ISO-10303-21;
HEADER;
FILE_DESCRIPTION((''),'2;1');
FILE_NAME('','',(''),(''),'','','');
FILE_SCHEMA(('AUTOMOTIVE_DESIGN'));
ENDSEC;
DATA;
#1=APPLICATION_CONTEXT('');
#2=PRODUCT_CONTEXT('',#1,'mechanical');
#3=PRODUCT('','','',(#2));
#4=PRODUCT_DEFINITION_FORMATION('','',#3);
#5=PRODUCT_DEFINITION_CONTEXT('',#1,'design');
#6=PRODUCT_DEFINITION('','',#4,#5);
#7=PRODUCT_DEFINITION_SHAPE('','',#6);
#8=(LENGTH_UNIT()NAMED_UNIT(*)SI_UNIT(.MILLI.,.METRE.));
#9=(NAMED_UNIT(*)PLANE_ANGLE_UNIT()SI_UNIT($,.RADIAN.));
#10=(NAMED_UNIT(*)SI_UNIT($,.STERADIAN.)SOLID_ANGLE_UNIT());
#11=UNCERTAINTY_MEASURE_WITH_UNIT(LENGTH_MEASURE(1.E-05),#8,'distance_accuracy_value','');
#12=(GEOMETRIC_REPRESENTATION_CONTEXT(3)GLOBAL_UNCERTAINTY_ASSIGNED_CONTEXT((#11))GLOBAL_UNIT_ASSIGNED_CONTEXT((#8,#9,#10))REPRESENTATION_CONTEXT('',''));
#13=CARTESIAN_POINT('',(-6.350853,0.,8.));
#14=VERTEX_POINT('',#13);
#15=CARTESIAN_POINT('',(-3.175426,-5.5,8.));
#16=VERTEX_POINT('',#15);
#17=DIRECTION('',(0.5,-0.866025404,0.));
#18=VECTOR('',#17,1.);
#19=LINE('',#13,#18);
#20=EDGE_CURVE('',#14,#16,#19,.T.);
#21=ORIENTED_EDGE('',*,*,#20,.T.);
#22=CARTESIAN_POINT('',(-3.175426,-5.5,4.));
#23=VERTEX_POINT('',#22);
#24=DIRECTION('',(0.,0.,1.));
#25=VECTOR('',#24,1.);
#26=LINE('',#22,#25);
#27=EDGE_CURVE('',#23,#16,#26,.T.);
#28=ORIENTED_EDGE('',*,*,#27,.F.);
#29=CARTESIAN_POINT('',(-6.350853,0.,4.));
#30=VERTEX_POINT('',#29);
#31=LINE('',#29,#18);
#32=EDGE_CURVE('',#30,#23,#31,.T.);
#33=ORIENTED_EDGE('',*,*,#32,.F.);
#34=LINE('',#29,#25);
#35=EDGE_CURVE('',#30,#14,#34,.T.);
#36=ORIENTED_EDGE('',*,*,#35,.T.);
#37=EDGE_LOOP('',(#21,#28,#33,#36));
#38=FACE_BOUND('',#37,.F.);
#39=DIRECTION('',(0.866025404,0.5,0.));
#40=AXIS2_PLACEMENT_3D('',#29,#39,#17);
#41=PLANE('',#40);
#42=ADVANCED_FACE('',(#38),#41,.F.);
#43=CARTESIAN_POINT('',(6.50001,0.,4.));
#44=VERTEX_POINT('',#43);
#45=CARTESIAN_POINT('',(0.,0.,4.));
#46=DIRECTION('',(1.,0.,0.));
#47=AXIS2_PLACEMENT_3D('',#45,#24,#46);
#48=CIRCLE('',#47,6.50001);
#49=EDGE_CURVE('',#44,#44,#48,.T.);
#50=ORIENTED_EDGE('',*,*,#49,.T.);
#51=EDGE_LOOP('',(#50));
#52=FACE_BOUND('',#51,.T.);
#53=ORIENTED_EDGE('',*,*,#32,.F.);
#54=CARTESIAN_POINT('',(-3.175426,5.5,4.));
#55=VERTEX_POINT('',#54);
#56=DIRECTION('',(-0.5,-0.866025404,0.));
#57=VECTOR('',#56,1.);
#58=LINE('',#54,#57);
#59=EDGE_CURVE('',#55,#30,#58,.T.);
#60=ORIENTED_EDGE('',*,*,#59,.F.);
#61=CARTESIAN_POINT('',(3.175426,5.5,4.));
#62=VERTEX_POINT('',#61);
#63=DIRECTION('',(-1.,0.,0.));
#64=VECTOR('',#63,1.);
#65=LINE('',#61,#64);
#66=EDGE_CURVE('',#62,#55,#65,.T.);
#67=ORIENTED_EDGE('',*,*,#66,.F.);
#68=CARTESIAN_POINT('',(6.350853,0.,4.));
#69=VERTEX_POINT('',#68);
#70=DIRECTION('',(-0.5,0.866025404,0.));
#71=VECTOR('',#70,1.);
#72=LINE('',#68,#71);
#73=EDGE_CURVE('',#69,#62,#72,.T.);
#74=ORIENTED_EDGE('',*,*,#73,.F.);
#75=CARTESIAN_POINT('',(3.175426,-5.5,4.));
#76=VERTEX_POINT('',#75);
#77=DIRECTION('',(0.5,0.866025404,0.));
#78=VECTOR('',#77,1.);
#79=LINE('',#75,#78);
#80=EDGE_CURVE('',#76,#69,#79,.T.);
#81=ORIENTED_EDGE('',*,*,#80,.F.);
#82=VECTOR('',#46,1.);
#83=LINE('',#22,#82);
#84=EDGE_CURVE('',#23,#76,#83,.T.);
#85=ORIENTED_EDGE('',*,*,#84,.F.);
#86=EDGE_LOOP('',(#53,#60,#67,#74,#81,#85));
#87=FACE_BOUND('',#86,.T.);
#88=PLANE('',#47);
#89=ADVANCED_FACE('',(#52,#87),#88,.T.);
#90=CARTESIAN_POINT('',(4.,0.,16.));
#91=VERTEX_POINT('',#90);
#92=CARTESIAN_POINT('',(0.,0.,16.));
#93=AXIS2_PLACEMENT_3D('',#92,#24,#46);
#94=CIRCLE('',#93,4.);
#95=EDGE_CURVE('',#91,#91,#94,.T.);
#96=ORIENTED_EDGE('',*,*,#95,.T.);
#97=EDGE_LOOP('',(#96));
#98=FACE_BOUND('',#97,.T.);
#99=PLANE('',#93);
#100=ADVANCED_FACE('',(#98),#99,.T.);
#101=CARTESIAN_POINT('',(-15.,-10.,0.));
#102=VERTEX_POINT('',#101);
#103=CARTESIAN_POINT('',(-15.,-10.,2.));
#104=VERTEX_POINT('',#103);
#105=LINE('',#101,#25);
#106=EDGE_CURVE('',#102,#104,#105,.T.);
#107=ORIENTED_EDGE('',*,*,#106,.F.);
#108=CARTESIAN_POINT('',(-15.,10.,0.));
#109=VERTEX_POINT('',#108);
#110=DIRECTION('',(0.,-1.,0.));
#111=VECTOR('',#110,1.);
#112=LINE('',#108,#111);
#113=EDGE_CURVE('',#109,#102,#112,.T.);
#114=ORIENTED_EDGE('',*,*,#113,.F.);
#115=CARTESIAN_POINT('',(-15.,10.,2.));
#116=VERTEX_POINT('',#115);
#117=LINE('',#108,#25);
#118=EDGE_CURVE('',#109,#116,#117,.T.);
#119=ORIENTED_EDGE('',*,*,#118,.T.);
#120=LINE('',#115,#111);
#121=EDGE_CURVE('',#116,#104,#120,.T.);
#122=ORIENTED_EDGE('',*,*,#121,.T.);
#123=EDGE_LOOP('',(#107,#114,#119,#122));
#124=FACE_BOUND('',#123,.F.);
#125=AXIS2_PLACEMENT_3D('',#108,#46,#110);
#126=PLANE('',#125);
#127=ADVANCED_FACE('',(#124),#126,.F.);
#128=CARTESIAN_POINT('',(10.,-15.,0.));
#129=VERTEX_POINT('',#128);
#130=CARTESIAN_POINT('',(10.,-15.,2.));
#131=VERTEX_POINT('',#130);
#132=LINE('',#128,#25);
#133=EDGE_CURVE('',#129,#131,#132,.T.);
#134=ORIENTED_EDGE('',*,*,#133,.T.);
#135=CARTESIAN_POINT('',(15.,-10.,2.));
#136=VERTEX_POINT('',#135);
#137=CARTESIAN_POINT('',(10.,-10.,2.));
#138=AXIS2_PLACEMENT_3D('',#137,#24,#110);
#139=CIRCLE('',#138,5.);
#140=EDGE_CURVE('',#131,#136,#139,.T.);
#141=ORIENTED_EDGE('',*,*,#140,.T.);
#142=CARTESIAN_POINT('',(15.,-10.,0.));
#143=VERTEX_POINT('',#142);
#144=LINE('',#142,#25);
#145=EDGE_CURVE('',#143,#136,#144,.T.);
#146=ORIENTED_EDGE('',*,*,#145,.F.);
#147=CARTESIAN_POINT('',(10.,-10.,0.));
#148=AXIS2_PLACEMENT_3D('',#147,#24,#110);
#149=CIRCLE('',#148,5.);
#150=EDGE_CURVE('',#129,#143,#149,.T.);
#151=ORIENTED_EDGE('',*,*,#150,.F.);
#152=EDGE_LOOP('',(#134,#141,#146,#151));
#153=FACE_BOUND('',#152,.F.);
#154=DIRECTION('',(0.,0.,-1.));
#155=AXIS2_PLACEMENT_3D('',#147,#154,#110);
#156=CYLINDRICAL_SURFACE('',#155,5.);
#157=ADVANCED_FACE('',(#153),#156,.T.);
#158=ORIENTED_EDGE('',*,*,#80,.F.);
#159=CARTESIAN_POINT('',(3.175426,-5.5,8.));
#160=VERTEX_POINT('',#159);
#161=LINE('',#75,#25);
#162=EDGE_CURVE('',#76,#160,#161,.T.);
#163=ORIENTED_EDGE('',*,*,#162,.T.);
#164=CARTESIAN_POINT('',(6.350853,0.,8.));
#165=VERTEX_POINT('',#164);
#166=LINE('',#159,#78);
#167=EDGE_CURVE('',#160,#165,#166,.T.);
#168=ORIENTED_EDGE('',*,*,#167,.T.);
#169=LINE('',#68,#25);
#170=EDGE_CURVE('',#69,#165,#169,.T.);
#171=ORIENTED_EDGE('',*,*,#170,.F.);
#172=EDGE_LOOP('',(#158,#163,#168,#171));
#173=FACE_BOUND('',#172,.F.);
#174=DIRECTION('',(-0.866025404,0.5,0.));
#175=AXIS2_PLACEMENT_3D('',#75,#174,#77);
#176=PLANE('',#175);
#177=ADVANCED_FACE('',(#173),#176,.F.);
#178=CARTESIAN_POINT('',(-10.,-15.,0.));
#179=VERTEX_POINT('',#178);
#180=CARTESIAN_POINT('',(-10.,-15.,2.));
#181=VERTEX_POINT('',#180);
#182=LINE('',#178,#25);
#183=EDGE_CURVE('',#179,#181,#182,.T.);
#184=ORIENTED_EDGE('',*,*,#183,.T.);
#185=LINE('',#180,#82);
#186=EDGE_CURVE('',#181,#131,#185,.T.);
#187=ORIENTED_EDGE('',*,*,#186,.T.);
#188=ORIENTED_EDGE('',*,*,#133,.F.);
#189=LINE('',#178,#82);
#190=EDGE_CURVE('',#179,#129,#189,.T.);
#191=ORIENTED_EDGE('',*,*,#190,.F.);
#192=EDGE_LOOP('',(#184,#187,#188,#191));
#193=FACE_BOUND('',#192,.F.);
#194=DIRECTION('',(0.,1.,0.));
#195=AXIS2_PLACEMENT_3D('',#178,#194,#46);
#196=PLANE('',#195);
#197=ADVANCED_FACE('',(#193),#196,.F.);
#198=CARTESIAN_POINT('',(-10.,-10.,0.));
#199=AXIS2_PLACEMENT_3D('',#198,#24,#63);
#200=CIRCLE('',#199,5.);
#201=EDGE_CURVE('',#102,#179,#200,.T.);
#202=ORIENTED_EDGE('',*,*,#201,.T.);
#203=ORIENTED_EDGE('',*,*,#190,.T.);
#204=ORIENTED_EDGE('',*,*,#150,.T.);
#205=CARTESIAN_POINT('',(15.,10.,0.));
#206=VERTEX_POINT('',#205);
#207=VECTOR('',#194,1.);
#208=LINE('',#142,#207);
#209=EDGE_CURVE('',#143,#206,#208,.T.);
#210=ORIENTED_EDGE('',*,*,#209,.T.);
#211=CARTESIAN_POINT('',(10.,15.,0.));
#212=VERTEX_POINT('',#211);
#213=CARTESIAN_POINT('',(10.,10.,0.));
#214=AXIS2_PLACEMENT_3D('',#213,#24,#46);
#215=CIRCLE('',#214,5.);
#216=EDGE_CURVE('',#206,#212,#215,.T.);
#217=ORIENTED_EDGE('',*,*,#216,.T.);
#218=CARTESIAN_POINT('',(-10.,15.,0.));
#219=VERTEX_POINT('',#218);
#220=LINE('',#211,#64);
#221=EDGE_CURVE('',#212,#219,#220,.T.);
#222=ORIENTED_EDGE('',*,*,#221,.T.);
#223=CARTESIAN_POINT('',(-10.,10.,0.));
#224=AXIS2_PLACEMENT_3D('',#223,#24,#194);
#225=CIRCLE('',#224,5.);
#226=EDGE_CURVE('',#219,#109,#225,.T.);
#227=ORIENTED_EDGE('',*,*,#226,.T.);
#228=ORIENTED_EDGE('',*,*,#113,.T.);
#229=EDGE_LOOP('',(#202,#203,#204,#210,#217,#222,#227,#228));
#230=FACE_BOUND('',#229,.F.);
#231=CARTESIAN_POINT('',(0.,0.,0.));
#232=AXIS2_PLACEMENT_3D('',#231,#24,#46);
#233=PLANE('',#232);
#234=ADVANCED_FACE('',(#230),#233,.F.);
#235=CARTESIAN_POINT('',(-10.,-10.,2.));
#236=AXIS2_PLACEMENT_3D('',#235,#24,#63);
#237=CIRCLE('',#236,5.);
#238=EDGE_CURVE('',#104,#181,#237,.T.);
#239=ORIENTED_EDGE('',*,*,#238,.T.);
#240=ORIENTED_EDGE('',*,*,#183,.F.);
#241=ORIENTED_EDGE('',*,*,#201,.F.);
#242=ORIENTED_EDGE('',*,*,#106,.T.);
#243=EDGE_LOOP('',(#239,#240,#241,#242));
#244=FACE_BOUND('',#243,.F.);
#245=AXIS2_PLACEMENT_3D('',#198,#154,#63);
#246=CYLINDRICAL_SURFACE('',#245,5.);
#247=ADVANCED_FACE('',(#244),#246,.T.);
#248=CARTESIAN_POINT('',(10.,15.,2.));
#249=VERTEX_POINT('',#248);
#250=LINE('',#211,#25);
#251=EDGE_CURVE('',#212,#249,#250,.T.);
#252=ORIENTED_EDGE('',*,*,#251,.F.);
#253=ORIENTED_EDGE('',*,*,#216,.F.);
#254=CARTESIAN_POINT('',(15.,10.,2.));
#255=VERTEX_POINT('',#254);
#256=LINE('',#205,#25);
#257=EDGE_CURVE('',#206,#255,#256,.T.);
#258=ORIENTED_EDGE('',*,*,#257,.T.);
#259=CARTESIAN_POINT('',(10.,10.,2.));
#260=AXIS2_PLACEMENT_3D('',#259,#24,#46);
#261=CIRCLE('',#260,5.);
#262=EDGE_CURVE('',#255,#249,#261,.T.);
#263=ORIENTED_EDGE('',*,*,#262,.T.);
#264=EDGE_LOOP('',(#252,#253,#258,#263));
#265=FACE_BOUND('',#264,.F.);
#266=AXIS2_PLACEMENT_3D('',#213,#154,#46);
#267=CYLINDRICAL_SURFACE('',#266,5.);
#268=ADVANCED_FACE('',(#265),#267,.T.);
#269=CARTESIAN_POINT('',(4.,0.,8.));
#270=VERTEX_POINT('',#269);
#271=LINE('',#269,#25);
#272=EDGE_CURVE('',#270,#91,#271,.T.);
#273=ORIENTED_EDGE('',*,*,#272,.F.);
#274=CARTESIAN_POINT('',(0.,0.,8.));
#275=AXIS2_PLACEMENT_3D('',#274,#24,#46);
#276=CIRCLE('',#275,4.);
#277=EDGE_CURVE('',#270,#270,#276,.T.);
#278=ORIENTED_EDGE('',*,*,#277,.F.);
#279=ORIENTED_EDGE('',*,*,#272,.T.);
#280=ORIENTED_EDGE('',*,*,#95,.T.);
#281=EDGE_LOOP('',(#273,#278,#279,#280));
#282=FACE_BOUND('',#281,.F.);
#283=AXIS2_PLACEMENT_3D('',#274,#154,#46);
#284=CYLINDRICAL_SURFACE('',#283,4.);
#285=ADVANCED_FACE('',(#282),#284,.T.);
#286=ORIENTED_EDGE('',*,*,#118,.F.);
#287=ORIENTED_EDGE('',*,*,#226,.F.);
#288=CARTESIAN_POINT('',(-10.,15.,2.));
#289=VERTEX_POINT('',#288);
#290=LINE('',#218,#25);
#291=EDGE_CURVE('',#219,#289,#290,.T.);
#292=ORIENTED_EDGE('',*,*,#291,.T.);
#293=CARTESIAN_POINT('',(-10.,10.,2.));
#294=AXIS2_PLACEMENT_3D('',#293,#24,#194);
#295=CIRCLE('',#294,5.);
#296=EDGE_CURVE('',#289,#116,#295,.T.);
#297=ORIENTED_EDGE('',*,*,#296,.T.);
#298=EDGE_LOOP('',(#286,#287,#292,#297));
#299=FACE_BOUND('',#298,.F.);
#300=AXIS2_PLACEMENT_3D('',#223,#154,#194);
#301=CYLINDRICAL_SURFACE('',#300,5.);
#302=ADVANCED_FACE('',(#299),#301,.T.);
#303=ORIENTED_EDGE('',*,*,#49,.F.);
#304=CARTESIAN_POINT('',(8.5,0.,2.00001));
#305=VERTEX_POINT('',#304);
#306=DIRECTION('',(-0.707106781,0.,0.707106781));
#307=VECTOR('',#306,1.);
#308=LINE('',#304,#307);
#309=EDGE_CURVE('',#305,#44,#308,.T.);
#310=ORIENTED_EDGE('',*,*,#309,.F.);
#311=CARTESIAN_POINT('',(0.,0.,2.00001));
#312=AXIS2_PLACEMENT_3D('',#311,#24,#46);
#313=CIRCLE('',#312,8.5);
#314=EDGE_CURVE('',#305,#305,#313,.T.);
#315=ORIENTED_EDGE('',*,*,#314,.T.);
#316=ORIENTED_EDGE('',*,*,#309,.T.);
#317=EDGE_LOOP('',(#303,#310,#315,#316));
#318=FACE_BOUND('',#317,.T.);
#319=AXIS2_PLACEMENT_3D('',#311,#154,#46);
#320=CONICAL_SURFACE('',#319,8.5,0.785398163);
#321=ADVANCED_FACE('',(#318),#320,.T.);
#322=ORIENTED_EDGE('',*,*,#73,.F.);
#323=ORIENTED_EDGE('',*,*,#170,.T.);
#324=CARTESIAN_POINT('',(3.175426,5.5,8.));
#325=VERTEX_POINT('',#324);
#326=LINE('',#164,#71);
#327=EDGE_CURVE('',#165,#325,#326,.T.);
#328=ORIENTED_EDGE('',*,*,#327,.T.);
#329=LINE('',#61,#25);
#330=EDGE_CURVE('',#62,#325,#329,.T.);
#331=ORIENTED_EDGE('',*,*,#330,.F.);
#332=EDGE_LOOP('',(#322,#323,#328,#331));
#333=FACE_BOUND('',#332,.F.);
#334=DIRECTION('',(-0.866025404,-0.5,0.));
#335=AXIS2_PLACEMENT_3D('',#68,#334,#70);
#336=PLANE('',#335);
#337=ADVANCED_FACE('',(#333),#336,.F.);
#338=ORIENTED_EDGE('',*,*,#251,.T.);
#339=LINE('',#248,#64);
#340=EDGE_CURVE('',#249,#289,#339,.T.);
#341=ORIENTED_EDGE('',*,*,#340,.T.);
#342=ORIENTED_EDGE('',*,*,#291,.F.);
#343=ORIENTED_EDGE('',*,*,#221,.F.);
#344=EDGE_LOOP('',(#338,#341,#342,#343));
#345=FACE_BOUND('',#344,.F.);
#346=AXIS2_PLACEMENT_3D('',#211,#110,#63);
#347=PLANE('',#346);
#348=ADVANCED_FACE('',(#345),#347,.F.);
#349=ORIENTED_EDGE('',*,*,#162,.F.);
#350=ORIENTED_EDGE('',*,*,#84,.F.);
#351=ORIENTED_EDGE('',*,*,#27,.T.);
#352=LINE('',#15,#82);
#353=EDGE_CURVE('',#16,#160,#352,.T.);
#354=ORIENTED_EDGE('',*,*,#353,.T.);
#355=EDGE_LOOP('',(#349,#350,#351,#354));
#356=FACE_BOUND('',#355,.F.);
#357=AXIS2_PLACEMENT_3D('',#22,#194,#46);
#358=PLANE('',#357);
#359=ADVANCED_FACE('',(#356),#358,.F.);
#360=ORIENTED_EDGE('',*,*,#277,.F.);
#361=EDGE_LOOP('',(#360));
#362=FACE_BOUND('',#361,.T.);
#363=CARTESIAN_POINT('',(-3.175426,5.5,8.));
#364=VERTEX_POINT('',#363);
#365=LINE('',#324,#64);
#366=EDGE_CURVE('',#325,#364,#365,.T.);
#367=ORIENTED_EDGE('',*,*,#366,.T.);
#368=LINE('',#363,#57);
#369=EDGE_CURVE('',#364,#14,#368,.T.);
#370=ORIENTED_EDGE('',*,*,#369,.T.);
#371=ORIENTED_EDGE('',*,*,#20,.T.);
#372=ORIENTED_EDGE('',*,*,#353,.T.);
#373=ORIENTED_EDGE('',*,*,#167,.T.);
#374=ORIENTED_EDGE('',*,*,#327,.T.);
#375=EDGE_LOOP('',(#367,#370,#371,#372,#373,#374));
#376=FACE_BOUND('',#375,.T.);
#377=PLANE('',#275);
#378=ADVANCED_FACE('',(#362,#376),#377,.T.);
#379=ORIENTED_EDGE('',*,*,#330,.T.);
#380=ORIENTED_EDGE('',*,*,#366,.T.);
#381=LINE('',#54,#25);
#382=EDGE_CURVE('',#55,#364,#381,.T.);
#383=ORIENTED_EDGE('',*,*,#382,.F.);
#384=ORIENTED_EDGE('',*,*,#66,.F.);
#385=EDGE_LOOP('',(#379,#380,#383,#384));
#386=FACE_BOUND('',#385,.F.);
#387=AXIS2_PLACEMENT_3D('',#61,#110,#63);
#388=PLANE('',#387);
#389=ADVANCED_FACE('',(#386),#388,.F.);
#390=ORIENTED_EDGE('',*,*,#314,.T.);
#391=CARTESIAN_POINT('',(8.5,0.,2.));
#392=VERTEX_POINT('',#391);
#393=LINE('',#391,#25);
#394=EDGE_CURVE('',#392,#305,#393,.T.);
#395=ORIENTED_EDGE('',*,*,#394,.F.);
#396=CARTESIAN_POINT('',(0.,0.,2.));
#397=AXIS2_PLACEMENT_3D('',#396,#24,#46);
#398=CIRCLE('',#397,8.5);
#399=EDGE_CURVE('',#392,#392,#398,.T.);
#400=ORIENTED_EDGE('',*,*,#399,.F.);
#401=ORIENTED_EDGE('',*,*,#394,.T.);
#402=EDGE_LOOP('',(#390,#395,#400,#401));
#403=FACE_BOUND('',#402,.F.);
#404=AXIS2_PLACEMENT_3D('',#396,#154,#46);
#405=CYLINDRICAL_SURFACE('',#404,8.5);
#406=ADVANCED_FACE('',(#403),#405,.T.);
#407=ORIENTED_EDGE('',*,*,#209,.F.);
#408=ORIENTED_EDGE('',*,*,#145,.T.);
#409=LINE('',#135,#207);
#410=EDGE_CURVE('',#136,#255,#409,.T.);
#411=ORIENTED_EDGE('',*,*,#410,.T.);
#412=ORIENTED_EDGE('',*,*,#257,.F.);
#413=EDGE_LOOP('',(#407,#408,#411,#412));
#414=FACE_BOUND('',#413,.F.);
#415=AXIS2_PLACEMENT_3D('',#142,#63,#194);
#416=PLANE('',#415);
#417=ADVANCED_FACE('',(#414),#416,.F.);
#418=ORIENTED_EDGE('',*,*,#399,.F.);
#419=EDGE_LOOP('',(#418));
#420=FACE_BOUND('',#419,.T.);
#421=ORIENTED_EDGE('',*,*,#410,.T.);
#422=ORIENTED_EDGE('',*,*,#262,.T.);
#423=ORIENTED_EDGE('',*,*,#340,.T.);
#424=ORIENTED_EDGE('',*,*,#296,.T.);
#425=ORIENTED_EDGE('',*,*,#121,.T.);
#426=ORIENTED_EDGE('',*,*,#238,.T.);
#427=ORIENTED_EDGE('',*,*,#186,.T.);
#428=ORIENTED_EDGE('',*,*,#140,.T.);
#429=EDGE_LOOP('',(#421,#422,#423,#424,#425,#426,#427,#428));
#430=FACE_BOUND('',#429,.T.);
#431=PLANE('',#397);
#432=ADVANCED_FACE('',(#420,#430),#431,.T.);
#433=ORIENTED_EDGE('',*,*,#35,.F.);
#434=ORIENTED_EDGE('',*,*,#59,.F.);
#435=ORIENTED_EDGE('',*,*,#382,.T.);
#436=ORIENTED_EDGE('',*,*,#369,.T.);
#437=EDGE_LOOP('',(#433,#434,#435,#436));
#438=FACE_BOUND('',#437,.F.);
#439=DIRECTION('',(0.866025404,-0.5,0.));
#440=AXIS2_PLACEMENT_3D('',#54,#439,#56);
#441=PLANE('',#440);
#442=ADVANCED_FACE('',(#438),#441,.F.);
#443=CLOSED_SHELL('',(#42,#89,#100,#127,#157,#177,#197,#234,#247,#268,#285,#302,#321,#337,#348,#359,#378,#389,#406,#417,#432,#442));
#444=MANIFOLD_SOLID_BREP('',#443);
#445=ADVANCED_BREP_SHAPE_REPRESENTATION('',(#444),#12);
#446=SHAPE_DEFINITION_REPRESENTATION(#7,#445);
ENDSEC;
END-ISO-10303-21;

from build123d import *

# Parameters (mm, degrees)
F1_DEPTH = 2
F2_R     = 8.5
F3_DEPTH = 2
F4_SIZE  = 1.99999
F6_DEPTH = 4
F7_R     = 4
F8_DEPTH = 8


# Not quite as in the source:
# - a fillet or chamfer is up to 0.001 mm smaller than in the source, because OpenCascade refuses the exact size


with BuildPart() as f1:
    # F0 (on Top) → F1 (new body)
    with BuildSketch(Plane.XY):
        with BuildLine():
            ThreePointArc((15, 10), (13.5355339059, 13.5355339059), (10, 15))
            Line((10, 15), (-10, 15))
            ThreePointArc((-10, 15), (-13.5355339059, 13.5355339059), (-15, 10))
            Line((-15, 10), (-15, -10))
            ThreePointArc((-15, -10), (-13.5355339059, -13.5355339059), (-10, -15))
            Line((-10, -15), (10, -15))
            ThreePointArc((10, -15), (13.5355339059, -13.5355339059), (15, -10))
            Line((15, -10), (15, 10))
        make_face()
    extrude(amount=F1_DEPTH)

    # F2 (on face) → F3 (join)
    with BuildSketch(Plane.XY.offset(2)):
        Circle(F2_R)
    extrude(amount=F3_DEPTH)

    # F4 (size 2 in the source; OpenCascade refuses exactly that, so slightly less here)
    f4_edges = [f1.edges().sort_by_distance(p)[0] for p in [
        (-8.5, 0, 4),
    ]]
    chamfer(f4_edges, length=F4_SIZE)

    # F5 (on face) → F6 (join)
    with BuildSketch(Plane.XY.offset(4)):
        Polygon((6.3508529611, 0), (3.1754264805, 5.5), (-3.1754264805, 5.5), (-6.3508529611, 0), (-3.1754264805, -5.5), (3.1754264805, -5.5), align=None)
    extrude(amount=F6_DEPTH)

    # F7 (on face) → F8 (join)
    with BuildSketch(Plane.XY.offset(8)):
        Circle(F7_R)
    extrude(amount=F8_DEPTH)


solid = f1.part
